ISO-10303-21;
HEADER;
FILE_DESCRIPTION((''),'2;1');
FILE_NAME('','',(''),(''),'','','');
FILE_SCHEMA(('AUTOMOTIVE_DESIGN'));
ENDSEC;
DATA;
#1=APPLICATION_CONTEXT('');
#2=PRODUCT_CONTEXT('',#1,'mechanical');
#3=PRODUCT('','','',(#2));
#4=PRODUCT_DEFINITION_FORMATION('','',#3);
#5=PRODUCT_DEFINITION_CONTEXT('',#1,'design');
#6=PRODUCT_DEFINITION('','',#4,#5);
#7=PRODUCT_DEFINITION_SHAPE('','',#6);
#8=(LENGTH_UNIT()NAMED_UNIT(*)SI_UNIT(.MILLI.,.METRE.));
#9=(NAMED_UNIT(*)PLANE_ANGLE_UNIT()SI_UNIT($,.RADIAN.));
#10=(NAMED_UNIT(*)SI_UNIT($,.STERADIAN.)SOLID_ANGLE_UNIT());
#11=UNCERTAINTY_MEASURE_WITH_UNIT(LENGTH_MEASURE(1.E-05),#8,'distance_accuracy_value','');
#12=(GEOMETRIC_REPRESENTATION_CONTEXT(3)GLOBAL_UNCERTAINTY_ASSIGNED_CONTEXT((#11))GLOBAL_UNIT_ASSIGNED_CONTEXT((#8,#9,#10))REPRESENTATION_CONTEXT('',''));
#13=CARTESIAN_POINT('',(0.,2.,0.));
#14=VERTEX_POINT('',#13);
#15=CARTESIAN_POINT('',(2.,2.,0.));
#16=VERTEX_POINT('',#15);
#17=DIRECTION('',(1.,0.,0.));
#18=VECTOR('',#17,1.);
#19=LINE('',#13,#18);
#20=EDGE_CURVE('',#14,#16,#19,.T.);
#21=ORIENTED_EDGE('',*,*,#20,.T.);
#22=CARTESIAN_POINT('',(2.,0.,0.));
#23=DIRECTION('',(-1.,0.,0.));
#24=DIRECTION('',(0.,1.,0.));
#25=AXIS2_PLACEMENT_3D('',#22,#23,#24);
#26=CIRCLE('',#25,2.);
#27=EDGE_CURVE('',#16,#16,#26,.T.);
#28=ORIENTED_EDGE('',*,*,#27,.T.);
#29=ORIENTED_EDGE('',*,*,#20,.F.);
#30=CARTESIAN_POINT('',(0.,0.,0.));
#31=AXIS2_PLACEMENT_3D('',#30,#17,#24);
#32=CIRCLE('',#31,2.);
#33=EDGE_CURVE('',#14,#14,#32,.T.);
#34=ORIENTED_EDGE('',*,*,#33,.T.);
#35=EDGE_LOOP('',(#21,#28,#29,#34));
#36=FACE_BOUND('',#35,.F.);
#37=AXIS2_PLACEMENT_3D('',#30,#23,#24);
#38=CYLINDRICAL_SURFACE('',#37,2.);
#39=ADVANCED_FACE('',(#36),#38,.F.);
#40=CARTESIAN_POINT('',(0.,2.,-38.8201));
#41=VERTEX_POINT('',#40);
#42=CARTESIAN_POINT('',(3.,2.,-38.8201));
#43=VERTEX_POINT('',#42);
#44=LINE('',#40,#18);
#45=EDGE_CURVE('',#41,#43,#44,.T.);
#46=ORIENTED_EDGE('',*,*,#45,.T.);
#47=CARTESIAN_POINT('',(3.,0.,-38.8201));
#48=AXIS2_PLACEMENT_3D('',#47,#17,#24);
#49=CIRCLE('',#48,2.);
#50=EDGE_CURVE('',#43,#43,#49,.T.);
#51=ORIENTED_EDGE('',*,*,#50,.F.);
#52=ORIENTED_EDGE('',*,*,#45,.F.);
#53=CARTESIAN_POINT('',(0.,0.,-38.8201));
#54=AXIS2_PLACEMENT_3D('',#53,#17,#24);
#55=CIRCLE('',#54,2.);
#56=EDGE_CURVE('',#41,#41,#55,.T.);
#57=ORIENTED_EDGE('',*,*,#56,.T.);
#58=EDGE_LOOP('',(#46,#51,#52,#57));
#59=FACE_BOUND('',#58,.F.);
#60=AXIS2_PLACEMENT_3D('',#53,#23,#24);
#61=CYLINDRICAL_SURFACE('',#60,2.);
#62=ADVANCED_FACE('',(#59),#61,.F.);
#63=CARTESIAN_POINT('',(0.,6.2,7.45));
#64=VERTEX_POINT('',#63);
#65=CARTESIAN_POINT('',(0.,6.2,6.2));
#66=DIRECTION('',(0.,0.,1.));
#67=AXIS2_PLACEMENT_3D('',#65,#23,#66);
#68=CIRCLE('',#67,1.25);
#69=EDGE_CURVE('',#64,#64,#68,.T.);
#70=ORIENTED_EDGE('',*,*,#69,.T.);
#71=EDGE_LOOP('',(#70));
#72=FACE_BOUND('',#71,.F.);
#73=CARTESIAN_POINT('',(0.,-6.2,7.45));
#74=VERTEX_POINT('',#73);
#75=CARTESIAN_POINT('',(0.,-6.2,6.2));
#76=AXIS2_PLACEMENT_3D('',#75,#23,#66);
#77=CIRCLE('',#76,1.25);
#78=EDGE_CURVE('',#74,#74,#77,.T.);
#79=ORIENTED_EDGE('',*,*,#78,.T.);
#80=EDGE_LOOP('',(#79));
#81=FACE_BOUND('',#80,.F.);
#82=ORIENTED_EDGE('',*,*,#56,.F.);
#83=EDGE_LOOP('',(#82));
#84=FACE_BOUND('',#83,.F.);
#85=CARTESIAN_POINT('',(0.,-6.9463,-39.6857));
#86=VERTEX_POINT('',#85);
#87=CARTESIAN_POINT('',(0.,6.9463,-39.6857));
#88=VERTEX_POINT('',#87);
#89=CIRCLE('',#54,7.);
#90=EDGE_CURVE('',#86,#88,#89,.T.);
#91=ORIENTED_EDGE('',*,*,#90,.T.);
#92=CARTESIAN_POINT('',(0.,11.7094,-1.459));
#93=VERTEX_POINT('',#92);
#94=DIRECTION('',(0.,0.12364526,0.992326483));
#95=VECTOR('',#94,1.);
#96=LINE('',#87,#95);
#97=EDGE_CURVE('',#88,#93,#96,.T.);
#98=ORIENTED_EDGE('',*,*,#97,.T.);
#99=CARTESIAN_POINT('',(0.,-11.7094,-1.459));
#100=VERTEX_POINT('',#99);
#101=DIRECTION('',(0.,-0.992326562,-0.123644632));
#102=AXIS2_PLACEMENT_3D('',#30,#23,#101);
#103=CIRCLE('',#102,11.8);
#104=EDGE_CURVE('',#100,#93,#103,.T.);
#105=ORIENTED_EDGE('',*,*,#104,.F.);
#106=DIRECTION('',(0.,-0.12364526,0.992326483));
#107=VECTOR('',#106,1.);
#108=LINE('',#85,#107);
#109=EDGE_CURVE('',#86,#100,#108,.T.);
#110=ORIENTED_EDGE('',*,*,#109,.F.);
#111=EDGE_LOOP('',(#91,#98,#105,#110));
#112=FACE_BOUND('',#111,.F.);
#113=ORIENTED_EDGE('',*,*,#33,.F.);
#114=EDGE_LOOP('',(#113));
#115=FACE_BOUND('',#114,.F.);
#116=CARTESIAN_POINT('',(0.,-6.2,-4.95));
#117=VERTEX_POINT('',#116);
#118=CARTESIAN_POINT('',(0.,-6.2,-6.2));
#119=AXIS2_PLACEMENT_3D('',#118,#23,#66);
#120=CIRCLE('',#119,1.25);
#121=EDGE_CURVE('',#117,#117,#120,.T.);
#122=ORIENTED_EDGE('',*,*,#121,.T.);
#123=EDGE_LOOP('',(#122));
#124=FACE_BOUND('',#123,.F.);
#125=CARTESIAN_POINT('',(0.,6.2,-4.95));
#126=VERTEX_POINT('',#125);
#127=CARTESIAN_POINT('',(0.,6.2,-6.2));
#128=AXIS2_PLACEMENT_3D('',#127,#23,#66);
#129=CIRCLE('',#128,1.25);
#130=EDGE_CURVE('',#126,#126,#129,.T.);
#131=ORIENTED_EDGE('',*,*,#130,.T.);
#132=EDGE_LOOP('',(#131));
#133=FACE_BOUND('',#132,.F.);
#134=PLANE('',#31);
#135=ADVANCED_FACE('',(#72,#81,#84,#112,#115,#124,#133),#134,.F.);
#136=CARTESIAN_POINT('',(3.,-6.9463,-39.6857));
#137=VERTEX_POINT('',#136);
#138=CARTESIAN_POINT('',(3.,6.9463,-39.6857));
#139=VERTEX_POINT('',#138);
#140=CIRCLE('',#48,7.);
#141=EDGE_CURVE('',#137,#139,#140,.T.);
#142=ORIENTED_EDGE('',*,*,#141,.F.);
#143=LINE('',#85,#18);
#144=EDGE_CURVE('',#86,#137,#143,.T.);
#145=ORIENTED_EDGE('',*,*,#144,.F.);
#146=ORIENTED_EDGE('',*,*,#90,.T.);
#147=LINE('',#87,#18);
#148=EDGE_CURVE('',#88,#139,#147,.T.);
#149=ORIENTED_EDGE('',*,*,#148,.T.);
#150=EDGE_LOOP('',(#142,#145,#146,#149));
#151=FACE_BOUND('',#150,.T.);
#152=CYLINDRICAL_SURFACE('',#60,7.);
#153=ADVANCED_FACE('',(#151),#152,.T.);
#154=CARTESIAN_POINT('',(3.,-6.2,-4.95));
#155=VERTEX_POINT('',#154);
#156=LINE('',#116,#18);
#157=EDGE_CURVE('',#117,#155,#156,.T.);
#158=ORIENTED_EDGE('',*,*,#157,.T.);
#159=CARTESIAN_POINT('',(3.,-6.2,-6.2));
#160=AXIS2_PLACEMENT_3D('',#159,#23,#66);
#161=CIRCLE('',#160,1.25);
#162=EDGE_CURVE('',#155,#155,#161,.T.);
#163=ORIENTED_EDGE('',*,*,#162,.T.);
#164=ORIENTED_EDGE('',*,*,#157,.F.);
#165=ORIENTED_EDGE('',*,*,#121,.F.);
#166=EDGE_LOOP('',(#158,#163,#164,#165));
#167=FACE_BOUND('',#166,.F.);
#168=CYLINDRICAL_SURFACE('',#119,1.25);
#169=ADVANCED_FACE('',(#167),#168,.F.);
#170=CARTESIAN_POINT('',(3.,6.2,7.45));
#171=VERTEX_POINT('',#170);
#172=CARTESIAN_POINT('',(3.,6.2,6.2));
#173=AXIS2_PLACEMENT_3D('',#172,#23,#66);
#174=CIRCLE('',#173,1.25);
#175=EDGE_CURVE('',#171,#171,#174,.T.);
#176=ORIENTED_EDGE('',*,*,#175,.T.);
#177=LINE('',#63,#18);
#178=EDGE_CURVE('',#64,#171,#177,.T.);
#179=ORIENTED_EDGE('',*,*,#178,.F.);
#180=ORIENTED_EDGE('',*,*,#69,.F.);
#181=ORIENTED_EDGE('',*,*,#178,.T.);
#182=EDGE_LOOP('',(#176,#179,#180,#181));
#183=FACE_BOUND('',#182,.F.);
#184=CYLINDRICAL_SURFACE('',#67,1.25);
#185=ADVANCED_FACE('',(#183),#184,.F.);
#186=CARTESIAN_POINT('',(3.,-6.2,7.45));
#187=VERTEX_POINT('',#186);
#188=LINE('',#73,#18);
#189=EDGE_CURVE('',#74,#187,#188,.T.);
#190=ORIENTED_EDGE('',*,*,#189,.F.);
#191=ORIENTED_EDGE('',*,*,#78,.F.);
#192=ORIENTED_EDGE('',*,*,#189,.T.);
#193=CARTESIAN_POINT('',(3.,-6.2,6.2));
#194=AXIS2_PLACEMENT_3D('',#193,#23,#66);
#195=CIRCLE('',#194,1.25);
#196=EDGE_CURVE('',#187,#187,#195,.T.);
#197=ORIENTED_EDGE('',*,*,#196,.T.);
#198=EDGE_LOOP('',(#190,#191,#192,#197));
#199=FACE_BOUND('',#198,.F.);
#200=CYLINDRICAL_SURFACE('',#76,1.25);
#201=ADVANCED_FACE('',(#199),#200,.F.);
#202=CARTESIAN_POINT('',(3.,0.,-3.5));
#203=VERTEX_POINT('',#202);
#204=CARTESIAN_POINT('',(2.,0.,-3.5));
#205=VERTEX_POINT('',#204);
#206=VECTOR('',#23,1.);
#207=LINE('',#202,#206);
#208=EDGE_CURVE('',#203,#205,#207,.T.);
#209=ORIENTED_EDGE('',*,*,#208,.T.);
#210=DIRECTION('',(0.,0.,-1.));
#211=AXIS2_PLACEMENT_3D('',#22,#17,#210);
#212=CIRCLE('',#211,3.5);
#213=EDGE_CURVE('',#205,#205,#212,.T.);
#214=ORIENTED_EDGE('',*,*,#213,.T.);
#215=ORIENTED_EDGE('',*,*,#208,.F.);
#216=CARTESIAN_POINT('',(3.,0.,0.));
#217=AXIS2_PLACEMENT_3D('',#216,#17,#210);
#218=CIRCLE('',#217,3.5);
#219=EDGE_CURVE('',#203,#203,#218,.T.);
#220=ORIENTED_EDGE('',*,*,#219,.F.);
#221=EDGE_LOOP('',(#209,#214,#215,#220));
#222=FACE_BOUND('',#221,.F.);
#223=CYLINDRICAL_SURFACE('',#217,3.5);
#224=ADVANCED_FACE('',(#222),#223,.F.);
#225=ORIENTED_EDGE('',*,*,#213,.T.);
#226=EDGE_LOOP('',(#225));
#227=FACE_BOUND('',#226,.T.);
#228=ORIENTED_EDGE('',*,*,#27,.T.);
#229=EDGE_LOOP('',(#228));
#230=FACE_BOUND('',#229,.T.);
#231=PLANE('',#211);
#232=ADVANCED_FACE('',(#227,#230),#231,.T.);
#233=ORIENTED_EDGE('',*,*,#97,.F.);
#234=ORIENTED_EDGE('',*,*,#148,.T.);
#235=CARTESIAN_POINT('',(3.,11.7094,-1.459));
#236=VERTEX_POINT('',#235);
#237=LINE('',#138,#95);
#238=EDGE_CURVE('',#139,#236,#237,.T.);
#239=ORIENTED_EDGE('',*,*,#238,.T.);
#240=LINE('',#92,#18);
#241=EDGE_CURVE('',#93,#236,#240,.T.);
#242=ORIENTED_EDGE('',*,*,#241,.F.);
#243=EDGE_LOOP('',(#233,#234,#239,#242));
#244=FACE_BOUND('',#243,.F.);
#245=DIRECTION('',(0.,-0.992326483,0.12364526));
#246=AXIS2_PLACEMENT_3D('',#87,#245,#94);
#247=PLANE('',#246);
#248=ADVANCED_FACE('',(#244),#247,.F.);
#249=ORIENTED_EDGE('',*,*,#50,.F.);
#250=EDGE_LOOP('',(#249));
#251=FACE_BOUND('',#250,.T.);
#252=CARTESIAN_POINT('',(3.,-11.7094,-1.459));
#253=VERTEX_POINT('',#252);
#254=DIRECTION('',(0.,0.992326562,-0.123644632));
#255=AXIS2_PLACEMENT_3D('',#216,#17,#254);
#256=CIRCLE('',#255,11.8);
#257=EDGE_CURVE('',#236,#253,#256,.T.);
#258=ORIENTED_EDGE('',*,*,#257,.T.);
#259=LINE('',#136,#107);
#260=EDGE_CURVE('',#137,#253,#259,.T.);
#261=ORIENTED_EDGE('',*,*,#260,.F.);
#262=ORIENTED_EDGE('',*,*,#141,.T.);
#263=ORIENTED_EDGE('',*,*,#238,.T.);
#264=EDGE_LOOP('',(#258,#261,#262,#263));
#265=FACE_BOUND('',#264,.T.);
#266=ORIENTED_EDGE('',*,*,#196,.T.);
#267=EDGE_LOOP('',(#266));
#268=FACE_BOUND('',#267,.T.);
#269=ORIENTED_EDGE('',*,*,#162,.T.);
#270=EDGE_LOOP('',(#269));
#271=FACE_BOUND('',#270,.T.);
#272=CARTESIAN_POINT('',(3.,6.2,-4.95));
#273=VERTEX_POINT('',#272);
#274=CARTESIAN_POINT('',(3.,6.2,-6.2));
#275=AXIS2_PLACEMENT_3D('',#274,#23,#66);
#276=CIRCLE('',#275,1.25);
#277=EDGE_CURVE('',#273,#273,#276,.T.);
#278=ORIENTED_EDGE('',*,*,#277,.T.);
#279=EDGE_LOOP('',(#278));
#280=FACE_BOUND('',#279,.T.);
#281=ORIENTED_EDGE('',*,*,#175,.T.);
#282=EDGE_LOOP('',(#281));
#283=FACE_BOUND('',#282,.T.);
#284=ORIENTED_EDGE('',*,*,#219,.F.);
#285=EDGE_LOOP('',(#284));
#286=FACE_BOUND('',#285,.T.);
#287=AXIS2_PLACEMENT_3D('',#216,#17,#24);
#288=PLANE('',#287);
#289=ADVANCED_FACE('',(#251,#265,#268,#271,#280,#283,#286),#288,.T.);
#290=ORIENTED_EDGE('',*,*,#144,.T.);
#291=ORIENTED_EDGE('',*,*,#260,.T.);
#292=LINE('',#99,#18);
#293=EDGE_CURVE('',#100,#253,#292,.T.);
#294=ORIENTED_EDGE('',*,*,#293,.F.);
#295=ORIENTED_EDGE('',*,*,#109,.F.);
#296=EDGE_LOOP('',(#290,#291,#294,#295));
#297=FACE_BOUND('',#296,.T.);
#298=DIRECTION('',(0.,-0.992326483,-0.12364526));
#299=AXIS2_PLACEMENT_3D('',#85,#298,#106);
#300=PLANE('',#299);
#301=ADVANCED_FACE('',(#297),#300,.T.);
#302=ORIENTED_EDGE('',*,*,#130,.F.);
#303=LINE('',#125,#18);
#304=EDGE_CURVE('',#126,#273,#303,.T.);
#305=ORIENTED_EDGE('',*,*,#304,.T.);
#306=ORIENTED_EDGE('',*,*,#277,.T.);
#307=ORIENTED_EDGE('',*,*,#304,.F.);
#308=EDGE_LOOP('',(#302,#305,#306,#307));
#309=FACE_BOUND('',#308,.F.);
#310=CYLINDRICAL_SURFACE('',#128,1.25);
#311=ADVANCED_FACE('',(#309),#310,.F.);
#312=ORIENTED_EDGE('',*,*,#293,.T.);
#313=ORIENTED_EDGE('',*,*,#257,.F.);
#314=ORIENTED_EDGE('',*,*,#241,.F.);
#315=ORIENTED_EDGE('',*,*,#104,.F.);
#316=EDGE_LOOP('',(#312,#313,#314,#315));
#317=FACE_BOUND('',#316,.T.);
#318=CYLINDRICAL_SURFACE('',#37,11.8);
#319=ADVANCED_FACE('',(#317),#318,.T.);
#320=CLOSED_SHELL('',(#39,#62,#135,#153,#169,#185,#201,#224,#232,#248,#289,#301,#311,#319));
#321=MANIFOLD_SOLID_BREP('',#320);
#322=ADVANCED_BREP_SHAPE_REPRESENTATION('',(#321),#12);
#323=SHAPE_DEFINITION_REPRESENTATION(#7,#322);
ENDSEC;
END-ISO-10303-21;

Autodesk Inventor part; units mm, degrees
ref_plane "YZ Plane" through (0, 0, 0) normal (1, 0, 0) x (0, 1, 0)
ref_plane "XZ Plane" through (0, 0, 0) normal (0, 1, 0) x (-1, 0, 0)
ref_plane "XY Plane" through (0, 0, 0) normal (0, 0, 1) x (1, 0, 0)
sketch "Эскиз1" plane through (0, 0, 0) normal (1, 0, 0) x (0, 1, 0)
  circle A0 centre (35.2311, -22.6062) radius 9.3
  circle A1 centre (0, -38.8201) radius 6.1
  circle A2 centre (0, 0) radius 4.85
  circle A3 centre (35.8147, -49.5529) radius 3.55
  line L0 (6.0968, -38.6237) -> (4.8475, 0.1562)
  line L1 (-4.8475, 0.1562) -> (-6.0968, -38.6237)
  line L2 (0, 0) -> (0, -38.8201) construction
  circle A4 centre (0, -38.8201) radius 2
  circle A5 centre (0, 0) radius 2
  circle A6 centre (0, -38.8201) radius 15 construction
  circle A7 centre (0, 0) radius 14 construction
  circle A8 centre (0, -38.8201) radius 7
  circle A9 centre (0, 0) radius 7
  line L3 (6.9463, -39.6857) -> (11.7094, -1.459)
  line L4 (-6.9463, -39.6857) -> (-11.7094, -1.459)
  circle A10 centre (0, 0) radius 8.8
  circle A11 centre (0, 0) radius 11.8
  point P0 (-7, 0)
  point P1 (-6.9463, -39.6857)
  point P2 (-11.7094, -1.459)
  dimension "d27" = 14
  dimension "d0" = 18.6
  dimension "d1" = 12.2
  dimension "d2" = 9.7
  dimension "d3" = 7.1
  dimension "d8" = 38.8201
  dimension "d13" = 38.8
  dimension "d14" = 38.8
  dimension "d23" = 4
  dimension "d24" = 4
  dimension "d25" = 30
  dimension "d26" = 28
  dimension "d28" = 14
  dimension "d31" = 17.6
  dimension "d32" = 3
extrude "Выдавливание4" add sketch "Эскиз1" along normal blind 3 contours A1 | A1 L0 A8 L1 | A1 L1 A8 L0 | A8 L1 A11 L0 | L0 A11 L3 A8 | A8 L4 A11 L1 | A11 L1 A10 L0 | L0 A10 L1 A11 | A10 L1 A9 L0 | L0 A9 L1 A10 | A9 L1 A2 L0 | L0 A2 L1 A9 | A2
sketch "Эскиз4" plane through (0, 0, 0) normal (-1, 0, 0) x (0, 0, 1)
  circle A0 centre (-6.2, 6.2) radius 1.25
  circle A1 centre (0, 0) radius 2 construction
  circle A2 centre (-38.8201, 0) radius 2 construction
  arc A3 (-1.459, -11.7094) -> (-1.459, 11.7094) centre (0, 0) ccw construction
  line L0 (-39.6857, 6.9463) -> (-1.459, 11.7094) construction
  arc A4 (-39.6857, 6.9463) -> (-39.6857, -6.9463) centre (-38.8201, 0) ccw construction
  line L1 (-1.459, -11.7094) -> (-39.6857, -6.9463) construction
  line L2 (0, 0) -> (0, 11.8) construction
  arc A5 (-1.459, -11.7094) -> (-1.459, 11.7094) centre (0, 0) ccw construction
  line L3 (0, 0) -> (11.8, 0) construction
  circle A6 centre (6.2, 6.2) radius 1.25
  circle A7 centre (-6.2, -6.2) radius 1.25
  circle A8 centre (6.2, -6.2) radius 1.25
  dimension "d33" = 2.5
  dimension "d34" = 12.4
  dimension "d35" = 12.4
extrude "Выдавливание5" cut sketch "Эскиз4" against normal blind 3
sketch "Эскиз5" plane through (3, 0, 0) normal (1, 0, 0) x (0, 0, -1)
  circle A0 centre (0, 0) radius 3.5
  dimension "d38" = 7
extrude "Выдавливание6" cut sketch "Эскиз5" against normal blind 1
properties part number "wall"
